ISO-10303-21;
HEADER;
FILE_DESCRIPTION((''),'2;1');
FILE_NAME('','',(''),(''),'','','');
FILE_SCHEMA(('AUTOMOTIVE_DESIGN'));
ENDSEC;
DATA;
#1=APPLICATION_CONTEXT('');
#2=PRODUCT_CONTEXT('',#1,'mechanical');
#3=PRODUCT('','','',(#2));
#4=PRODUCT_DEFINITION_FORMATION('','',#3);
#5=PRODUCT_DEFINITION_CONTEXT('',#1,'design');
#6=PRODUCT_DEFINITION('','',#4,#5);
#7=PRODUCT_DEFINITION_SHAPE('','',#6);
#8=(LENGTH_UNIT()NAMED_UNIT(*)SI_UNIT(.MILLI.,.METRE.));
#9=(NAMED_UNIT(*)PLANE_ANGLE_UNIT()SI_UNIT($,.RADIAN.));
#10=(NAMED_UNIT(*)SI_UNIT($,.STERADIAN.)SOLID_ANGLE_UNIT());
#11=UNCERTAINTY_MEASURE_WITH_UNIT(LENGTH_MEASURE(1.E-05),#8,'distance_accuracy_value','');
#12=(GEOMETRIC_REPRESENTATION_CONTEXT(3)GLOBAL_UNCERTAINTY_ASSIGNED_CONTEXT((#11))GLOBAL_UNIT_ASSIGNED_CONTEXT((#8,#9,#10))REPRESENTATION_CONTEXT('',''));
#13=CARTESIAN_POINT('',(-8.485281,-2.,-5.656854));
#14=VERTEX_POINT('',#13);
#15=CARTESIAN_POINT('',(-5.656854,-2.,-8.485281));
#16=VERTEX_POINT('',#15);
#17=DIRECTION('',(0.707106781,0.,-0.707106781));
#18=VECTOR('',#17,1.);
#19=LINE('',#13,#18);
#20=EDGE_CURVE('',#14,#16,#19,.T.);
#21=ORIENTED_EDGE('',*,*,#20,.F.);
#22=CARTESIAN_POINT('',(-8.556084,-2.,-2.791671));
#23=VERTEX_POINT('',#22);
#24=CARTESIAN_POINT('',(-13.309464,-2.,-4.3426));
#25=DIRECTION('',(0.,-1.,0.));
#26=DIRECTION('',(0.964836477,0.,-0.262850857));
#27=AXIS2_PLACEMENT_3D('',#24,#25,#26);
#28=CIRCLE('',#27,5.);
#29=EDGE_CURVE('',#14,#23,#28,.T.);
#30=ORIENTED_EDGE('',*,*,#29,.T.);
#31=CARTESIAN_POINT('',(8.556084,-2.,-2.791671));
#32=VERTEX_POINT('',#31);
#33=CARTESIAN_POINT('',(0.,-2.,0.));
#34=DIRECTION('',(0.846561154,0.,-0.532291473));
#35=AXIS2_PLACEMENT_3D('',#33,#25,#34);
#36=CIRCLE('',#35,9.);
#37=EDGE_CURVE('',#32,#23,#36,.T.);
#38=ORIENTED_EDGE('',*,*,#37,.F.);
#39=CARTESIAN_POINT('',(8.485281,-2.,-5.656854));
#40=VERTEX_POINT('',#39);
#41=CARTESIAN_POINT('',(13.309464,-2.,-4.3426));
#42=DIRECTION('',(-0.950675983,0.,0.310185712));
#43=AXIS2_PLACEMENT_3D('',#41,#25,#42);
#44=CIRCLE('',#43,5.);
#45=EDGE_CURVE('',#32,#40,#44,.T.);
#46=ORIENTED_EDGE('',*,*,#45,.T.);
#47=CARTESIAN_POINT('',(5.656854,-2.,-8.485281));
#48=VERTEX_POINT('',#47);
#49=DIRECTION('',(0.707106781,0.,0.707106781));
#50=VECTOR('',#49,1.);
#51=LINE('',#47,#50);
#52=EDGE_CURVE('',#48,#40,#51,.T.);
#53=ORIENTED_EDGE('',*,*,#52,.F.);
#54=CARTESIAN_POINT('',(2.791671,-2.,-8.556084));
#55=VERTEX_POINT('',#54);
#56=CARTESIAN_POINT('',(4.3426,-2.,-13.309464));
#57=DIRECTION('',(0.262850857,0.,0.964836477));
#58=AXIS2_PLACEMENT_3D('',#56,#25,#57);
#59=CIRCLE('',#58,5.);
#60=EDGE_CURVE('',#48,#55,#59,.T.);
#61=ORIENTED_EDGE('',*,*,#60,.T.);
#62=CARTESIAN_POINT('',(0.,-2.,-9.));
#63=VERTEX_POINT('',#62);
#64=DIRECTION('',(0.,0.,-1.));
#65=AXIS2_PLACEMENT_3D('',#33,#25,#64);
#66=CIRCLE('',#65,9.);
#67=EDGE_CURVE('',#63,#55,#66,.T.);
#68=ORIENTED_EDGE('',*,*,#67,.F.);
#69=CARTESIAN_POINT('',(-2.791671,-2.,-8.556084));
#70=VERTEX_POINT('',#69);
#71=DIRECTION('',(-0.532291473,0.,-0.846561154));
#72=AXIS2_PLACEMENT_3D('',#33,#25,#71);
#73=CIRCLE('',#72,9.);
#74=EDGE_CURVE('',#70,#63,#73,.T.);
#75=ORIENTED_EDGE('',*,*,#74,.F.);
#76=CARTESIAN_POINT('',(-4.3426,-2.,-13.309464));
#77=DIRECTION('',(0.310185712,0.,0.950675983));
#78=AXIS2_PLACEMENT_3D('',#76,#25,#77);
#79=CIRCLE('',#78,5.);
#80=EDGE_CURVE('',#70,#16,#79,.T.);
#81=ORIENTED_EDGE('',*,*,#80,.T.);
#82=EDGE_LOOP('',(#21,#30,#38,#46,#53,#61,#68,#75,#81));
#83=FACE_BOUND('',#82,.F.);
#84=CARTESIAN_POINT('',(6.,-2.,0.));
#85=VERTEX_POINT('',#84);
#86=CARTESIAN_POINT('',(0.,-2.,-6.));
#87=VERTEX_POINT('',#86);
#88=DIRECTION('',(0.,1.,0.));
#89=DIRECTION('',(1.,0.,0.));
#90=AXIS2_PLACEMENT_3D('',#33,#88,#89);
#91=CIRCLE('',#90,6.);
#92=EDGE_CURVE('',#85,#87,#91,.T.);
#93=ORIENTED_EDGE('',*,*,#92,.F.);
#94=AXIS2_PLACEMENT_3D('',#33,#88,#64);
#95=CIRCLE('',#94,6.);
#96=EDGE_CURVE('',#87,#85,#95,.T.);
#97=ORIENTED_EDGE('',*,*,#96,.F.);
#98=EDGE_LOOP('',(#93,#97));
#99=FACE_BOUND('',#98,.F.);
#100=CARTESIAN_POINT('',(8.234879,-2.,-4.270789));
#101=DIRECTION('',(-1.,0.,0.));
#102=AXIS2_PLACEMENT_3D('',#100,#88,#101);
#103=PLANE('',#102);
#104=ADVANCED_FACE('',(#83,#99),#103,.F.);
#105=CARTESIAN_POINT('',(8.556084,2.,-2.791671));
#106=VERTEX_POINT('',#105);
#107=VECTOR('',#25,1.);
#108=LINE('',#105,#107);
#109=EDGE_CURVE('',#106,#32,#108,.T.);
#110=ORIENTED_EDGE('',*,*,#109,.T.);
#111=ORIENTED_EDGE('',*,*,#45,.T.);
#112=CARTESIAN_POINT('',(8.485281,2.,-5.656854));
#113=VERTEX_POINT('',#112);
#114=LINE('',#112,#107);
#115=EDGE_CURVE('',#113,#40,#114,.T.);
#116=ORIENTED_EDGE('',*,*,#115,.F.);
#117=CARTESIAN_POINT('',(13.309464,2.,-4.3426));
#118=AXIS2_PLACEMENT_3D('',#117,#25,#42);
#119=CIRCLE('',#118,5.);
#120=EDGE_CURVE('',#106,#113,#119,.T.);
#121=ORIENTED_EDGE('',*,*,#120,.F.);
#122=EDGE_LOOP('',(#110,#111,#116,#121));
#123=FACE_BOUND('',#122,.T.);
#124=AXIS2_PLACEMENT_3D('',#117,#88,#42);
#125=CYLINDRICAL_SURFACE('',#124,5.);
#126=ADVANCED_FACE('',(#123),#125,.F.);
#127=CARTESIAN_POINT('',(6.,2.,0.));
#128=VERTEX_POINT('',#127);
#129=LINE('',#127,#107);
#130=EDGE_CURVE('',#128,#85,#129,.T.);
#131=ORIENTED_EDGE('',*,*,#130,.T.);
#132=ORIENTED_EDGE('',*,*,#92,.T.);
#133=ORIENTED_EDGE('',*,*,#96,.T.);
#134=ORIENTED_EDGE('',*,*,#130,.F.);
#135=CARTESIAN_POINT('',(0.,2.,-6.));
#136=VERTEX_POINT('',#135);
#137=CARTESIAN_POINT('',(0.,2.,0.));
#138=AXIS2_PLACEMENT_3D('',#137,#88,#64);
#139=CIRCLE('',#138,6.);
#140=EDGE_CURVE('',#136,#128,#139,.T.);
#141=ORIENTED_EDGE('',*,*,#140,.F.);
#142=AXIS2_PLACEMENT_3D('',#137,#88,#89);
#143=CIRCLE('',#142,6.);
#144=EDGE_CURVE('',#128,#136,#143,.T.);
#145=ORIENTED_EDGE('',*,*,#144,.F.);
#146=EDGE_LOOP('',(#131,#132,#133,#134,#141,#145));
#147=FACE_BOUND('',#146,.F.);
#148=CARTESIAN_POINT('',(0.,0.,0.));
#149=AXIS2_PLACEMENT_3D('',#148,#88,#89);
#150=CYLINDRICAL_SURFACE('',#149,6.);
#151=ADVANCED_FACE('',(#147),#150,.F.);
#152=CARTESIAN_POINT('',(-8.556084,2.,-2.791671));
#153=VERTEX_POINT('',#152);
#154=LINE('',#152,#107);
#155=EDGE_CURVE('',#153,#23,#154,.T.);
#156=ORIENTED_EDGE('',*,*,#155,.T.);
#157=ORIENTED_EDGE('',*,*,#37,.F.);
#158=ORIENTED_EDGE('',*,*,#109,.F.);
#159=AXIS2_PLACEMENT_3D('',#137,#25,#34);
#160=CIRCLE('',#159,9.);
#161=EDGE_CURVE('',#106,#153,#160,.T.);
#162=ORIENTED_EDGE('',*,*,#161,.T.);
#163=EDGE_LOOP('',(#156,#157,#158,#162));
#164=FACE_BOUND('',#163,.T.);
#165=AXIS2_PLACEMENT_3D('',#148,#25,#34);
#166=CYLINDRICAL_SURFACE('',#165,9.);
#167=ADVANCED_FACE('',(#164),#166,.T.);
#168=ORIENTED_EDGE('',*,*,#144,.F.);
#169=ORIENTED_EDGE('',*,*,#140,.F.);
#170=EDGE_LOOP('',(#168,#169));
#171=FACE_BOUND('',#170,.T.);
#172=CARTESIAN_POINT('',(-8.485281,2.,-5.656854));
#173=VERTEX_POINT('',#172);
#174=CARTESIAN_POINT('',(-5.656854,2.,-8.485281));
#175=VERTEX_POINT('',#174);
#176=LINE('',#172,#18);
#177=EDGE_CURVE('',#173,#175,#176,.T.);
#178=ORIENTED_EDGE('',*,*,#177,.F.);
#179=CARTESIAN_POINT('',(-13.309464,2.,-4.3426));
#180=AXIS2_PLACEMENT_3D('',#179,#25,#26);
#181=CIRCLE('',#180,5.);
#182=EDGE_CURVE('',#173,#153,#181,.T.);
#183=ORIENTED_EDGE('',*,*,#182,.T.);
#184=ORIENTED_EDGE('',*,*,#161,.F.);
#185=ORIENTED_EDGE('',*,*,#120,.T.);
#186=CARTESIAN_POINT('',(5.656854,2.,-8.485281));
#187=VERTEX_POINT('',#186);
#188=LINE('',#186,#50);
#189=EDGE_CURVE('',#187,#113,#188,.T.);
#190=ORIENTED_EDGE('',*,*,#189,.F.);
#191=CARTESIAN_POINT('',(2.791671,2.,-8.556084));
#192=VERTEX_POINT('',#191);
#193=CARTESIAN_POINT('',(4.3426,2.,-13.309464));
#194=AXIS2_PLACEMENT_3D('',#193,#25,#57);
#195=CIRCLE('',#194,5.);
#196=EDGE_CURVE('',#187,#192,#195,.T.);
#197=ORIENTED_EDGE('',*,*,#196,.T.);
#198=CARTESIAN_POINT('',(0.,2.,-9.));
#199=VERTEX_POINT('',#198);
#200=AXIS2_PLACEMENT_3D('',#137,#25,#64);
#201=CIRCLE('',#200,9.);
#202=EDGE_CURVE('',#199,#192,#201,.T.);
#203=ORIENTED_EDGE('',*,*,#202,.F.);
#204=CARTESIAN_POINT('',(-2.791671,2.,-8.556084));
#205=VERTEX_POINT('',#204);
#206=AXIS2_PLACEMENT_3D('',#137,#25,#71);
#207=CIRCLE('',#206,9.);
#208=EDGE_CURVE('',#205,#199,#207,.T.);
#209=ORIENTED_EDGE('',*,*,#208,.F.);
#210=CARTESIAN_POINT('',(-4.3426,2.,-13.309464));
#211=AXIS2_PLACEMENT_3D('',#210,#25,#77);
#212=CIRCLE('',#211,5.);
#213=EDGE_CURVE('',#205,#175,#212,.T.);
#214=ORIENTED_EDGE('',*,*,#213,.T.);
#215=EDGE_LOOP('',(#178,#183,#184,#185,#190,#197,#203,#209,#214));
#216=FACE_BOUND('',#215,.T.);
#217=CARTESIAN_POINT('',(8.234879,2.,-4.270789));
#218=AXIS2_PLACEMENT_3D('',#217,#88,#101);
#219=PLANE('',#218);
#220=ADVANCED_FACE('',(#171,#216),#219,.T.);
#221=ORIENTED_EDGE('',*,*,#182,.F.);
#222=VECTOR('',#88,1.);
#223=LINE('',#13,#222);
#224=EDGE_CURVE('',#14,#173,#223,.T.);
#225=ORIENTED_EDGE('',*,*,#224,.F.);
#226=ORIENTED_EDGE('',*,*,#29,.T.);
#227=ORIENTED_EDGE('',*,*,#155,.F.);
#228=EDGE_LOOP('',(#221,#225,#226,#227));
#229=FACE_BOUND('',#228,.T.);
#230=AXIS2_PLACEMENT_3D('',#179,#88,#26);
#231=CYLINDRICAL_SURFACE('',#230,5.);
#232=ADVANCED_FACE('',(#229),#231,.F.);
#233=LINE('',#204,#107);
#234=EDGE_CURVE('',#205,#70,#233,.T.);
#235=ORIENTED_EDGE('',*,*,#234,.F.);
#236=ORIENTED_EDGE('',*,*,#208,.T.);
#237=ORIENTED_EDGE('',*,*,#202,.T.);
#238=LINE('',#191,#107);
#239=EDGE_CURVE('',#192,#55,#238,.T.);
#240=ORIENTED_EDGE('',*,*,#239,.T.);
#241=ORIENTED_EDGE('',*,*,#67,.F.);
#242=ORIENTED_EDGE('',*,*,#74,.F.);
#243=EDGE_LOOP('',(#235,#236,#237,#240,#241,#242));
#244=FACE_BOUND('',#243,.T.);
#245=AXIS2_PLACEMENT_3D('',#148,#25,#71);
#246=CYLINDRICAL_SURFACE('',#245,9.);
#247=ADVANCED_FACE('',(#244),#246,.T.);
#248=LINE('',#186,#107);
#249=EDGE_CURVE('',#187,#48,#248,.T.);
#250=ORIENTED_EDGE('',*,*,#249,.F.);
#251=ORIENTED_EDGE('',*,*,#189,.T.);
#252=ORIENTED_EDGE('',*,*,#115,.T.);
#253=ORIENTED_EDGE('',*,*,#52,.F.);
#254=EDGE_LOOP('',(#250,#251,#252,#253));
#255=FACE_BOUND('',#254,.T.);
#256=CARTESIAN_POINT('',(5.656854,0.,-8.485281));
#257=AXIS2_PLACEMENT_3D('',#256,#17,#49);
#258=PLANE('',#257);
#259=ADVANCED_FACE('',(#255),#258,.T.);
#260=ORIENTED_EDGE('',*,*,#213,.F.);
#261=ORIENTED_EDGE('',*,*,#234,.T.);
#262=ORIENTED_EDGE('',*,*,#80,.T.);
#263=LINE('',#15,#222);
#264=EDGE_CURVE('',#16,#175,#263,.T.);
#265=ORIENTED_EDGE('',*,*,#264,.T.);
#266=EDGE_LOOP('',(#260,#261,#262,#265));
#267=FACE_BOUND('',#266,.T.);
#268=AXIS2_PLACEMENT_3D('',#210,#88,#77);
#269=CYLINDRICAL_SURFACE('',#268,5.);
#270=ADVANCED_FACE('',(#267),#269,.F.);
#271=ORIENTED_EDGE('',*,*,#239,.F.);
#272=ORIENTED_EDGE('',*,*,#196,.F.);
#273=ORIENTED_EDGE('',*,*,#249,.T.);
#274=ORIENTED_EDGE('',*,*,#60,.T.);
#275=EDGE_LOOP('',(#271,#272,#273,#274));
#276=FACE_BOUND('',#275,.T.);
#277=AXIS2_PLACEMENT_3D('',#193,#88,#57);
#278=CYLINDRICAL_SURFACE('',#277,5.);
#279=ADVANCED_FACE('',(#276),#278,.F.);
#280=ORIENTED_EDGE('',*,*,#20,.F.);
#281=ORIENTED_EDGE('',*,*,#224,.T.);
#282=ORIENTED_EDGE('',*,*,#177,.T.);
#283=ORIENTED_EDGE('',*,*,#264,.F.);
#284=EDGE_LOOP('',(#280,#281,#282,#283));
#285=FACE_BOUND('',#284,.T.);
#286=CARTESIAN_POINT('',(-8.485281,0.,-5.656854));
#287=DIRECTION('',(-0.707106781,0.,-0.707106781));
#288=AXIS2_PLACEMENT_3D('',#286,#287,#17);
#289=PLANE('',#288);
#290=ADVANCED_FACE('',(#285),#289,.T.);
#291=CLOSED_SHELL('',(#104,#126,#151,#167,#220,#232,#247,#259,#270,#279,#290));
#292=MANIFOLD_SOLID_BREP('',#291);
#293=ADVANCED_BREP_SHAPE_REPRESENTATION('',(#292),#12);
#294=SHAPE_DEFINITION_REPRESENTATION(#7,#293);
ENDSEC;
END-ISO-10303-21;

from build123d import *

# Parameters (mm, degrees)
F1_DEPTH    = 2
F2_T1_DEPTH = 4


# Not quite as in the source:
# - a fillet or chamfer that OpenCascade refuses, or shapes differently, is made with other operations: its cross-section is extruded or revolved along the edge and cut away or added


with BuildPart() as f1:
    # F0 (on Front) → F1 (new body, symmetric)
    with BuildSketch(Plane.XZ):
        with BuildLine():
            ThreePointArc((-4.7906232606, -7.6190503854), (-2.4928444127, -8.6478741165), (0, -9))
            ThreePointArc((0, -9), (2.4928444127, -8.6478741165), (4.7906232606, -7.6190503854))
            Line((4.7906232606, -7.6190503854), (5.6568542495, -8.4852813742))
            Line((5.6568542495, -8.4852813742), (8.4852813742, -5.6568542495))
            Line((8.4852813742, -5.6568542495), (7.6190503854, -4.7906232606))
            ThreePointArc((7.6190503854, -4.7906232606), (0, 9), (-7.6190503854, -4.7906232606))
            Line((-7.6190503854, -4.7906232606), (-8.4852813742, -5.6568542495))
            Line((-8.4852813742, -5.6568542495), (-5.6568542495, -8.4852813742))
            Line((-5.6568542495, -8.4852813742), (-4.7906232606, -7.6190503854))
        make_face()
        with BuildLine():
            ThreePointArc((0, -6), (-4.2426406871, 4.2426406871), (6, 0))
            ThreePointArc((6, 0), (4.2426406871, -4.2426406871), (0, -6))
        make_face(mode=Mode.SUBTRACT)
    extrude(amount=F1_DEPTH, both=True)

    # F2: fillet of radius 5 on 4 edges, made by hand

    # F2_s2 → F2_t1 (join)
    with BuildSketch(Plane.XZ.offset(-2)):
        with BuildLine():
            ThreePointArc((8.5560838448, -2.7916714064), (8.3109896839, -4.2190810375), (8.4852813742, -5.6568542495))
            Line((8.4852813742, -5.6568542495), (7.6190503854, -4.7906232606))
            ThreePointArc((7.6190503854, -4.7906232606), (8.149091604, -3.8199877003), (8.5560838448, -2.7916714064))
        make_face()
        with BuildLine():
            ThreePointArc((5.6568542495, -8.4852813742), (4.2190810375, -8.3109896839), (2.7916714064, -8.5560838448))
            ThreePointArc((2.7916714064, -8.5560838448), (3.8199877003, -8.149091604), (4.7906232606, -7.6190503854))
            Line((4.7906232606, -7.6190503854), (5.6568542495, -8.4852813742))
        make_face()
        with BuildLine():
            ThreePointArc((-2.7916714064, -8.5560838448), (-4.2190810375, -8.3109896839), (-5.6568542495, -8.4852813742))
            Line((-5.6568542495, -8.4852813742), (-4.7906232606, -7.6190503854))
            ThreePointArc((-4.7906232606, -7.6190503854), (-3.8199877003, -8.149091604), (-2.7916714064, -8.5560838448))
        make_face()
        with BuildLine():
            ThreePointArc((-8.4852813742, -5.6568542495), (-8.3109896839, -4.2190810375), (-8.5560838448, -2.7916714064))
            ThreePointArc((-8.5560838448, -2.7916714064), (-8.149091604, -3.8199877003), (-7.6190503854, -4.7906232606))
            Line((-7.6190503854, -4.7906232606), (-8.4852813742, -5.6568542495))
        make_face()
    extrude(amount=F2_T1_DEPTH)


solid = f1.part
